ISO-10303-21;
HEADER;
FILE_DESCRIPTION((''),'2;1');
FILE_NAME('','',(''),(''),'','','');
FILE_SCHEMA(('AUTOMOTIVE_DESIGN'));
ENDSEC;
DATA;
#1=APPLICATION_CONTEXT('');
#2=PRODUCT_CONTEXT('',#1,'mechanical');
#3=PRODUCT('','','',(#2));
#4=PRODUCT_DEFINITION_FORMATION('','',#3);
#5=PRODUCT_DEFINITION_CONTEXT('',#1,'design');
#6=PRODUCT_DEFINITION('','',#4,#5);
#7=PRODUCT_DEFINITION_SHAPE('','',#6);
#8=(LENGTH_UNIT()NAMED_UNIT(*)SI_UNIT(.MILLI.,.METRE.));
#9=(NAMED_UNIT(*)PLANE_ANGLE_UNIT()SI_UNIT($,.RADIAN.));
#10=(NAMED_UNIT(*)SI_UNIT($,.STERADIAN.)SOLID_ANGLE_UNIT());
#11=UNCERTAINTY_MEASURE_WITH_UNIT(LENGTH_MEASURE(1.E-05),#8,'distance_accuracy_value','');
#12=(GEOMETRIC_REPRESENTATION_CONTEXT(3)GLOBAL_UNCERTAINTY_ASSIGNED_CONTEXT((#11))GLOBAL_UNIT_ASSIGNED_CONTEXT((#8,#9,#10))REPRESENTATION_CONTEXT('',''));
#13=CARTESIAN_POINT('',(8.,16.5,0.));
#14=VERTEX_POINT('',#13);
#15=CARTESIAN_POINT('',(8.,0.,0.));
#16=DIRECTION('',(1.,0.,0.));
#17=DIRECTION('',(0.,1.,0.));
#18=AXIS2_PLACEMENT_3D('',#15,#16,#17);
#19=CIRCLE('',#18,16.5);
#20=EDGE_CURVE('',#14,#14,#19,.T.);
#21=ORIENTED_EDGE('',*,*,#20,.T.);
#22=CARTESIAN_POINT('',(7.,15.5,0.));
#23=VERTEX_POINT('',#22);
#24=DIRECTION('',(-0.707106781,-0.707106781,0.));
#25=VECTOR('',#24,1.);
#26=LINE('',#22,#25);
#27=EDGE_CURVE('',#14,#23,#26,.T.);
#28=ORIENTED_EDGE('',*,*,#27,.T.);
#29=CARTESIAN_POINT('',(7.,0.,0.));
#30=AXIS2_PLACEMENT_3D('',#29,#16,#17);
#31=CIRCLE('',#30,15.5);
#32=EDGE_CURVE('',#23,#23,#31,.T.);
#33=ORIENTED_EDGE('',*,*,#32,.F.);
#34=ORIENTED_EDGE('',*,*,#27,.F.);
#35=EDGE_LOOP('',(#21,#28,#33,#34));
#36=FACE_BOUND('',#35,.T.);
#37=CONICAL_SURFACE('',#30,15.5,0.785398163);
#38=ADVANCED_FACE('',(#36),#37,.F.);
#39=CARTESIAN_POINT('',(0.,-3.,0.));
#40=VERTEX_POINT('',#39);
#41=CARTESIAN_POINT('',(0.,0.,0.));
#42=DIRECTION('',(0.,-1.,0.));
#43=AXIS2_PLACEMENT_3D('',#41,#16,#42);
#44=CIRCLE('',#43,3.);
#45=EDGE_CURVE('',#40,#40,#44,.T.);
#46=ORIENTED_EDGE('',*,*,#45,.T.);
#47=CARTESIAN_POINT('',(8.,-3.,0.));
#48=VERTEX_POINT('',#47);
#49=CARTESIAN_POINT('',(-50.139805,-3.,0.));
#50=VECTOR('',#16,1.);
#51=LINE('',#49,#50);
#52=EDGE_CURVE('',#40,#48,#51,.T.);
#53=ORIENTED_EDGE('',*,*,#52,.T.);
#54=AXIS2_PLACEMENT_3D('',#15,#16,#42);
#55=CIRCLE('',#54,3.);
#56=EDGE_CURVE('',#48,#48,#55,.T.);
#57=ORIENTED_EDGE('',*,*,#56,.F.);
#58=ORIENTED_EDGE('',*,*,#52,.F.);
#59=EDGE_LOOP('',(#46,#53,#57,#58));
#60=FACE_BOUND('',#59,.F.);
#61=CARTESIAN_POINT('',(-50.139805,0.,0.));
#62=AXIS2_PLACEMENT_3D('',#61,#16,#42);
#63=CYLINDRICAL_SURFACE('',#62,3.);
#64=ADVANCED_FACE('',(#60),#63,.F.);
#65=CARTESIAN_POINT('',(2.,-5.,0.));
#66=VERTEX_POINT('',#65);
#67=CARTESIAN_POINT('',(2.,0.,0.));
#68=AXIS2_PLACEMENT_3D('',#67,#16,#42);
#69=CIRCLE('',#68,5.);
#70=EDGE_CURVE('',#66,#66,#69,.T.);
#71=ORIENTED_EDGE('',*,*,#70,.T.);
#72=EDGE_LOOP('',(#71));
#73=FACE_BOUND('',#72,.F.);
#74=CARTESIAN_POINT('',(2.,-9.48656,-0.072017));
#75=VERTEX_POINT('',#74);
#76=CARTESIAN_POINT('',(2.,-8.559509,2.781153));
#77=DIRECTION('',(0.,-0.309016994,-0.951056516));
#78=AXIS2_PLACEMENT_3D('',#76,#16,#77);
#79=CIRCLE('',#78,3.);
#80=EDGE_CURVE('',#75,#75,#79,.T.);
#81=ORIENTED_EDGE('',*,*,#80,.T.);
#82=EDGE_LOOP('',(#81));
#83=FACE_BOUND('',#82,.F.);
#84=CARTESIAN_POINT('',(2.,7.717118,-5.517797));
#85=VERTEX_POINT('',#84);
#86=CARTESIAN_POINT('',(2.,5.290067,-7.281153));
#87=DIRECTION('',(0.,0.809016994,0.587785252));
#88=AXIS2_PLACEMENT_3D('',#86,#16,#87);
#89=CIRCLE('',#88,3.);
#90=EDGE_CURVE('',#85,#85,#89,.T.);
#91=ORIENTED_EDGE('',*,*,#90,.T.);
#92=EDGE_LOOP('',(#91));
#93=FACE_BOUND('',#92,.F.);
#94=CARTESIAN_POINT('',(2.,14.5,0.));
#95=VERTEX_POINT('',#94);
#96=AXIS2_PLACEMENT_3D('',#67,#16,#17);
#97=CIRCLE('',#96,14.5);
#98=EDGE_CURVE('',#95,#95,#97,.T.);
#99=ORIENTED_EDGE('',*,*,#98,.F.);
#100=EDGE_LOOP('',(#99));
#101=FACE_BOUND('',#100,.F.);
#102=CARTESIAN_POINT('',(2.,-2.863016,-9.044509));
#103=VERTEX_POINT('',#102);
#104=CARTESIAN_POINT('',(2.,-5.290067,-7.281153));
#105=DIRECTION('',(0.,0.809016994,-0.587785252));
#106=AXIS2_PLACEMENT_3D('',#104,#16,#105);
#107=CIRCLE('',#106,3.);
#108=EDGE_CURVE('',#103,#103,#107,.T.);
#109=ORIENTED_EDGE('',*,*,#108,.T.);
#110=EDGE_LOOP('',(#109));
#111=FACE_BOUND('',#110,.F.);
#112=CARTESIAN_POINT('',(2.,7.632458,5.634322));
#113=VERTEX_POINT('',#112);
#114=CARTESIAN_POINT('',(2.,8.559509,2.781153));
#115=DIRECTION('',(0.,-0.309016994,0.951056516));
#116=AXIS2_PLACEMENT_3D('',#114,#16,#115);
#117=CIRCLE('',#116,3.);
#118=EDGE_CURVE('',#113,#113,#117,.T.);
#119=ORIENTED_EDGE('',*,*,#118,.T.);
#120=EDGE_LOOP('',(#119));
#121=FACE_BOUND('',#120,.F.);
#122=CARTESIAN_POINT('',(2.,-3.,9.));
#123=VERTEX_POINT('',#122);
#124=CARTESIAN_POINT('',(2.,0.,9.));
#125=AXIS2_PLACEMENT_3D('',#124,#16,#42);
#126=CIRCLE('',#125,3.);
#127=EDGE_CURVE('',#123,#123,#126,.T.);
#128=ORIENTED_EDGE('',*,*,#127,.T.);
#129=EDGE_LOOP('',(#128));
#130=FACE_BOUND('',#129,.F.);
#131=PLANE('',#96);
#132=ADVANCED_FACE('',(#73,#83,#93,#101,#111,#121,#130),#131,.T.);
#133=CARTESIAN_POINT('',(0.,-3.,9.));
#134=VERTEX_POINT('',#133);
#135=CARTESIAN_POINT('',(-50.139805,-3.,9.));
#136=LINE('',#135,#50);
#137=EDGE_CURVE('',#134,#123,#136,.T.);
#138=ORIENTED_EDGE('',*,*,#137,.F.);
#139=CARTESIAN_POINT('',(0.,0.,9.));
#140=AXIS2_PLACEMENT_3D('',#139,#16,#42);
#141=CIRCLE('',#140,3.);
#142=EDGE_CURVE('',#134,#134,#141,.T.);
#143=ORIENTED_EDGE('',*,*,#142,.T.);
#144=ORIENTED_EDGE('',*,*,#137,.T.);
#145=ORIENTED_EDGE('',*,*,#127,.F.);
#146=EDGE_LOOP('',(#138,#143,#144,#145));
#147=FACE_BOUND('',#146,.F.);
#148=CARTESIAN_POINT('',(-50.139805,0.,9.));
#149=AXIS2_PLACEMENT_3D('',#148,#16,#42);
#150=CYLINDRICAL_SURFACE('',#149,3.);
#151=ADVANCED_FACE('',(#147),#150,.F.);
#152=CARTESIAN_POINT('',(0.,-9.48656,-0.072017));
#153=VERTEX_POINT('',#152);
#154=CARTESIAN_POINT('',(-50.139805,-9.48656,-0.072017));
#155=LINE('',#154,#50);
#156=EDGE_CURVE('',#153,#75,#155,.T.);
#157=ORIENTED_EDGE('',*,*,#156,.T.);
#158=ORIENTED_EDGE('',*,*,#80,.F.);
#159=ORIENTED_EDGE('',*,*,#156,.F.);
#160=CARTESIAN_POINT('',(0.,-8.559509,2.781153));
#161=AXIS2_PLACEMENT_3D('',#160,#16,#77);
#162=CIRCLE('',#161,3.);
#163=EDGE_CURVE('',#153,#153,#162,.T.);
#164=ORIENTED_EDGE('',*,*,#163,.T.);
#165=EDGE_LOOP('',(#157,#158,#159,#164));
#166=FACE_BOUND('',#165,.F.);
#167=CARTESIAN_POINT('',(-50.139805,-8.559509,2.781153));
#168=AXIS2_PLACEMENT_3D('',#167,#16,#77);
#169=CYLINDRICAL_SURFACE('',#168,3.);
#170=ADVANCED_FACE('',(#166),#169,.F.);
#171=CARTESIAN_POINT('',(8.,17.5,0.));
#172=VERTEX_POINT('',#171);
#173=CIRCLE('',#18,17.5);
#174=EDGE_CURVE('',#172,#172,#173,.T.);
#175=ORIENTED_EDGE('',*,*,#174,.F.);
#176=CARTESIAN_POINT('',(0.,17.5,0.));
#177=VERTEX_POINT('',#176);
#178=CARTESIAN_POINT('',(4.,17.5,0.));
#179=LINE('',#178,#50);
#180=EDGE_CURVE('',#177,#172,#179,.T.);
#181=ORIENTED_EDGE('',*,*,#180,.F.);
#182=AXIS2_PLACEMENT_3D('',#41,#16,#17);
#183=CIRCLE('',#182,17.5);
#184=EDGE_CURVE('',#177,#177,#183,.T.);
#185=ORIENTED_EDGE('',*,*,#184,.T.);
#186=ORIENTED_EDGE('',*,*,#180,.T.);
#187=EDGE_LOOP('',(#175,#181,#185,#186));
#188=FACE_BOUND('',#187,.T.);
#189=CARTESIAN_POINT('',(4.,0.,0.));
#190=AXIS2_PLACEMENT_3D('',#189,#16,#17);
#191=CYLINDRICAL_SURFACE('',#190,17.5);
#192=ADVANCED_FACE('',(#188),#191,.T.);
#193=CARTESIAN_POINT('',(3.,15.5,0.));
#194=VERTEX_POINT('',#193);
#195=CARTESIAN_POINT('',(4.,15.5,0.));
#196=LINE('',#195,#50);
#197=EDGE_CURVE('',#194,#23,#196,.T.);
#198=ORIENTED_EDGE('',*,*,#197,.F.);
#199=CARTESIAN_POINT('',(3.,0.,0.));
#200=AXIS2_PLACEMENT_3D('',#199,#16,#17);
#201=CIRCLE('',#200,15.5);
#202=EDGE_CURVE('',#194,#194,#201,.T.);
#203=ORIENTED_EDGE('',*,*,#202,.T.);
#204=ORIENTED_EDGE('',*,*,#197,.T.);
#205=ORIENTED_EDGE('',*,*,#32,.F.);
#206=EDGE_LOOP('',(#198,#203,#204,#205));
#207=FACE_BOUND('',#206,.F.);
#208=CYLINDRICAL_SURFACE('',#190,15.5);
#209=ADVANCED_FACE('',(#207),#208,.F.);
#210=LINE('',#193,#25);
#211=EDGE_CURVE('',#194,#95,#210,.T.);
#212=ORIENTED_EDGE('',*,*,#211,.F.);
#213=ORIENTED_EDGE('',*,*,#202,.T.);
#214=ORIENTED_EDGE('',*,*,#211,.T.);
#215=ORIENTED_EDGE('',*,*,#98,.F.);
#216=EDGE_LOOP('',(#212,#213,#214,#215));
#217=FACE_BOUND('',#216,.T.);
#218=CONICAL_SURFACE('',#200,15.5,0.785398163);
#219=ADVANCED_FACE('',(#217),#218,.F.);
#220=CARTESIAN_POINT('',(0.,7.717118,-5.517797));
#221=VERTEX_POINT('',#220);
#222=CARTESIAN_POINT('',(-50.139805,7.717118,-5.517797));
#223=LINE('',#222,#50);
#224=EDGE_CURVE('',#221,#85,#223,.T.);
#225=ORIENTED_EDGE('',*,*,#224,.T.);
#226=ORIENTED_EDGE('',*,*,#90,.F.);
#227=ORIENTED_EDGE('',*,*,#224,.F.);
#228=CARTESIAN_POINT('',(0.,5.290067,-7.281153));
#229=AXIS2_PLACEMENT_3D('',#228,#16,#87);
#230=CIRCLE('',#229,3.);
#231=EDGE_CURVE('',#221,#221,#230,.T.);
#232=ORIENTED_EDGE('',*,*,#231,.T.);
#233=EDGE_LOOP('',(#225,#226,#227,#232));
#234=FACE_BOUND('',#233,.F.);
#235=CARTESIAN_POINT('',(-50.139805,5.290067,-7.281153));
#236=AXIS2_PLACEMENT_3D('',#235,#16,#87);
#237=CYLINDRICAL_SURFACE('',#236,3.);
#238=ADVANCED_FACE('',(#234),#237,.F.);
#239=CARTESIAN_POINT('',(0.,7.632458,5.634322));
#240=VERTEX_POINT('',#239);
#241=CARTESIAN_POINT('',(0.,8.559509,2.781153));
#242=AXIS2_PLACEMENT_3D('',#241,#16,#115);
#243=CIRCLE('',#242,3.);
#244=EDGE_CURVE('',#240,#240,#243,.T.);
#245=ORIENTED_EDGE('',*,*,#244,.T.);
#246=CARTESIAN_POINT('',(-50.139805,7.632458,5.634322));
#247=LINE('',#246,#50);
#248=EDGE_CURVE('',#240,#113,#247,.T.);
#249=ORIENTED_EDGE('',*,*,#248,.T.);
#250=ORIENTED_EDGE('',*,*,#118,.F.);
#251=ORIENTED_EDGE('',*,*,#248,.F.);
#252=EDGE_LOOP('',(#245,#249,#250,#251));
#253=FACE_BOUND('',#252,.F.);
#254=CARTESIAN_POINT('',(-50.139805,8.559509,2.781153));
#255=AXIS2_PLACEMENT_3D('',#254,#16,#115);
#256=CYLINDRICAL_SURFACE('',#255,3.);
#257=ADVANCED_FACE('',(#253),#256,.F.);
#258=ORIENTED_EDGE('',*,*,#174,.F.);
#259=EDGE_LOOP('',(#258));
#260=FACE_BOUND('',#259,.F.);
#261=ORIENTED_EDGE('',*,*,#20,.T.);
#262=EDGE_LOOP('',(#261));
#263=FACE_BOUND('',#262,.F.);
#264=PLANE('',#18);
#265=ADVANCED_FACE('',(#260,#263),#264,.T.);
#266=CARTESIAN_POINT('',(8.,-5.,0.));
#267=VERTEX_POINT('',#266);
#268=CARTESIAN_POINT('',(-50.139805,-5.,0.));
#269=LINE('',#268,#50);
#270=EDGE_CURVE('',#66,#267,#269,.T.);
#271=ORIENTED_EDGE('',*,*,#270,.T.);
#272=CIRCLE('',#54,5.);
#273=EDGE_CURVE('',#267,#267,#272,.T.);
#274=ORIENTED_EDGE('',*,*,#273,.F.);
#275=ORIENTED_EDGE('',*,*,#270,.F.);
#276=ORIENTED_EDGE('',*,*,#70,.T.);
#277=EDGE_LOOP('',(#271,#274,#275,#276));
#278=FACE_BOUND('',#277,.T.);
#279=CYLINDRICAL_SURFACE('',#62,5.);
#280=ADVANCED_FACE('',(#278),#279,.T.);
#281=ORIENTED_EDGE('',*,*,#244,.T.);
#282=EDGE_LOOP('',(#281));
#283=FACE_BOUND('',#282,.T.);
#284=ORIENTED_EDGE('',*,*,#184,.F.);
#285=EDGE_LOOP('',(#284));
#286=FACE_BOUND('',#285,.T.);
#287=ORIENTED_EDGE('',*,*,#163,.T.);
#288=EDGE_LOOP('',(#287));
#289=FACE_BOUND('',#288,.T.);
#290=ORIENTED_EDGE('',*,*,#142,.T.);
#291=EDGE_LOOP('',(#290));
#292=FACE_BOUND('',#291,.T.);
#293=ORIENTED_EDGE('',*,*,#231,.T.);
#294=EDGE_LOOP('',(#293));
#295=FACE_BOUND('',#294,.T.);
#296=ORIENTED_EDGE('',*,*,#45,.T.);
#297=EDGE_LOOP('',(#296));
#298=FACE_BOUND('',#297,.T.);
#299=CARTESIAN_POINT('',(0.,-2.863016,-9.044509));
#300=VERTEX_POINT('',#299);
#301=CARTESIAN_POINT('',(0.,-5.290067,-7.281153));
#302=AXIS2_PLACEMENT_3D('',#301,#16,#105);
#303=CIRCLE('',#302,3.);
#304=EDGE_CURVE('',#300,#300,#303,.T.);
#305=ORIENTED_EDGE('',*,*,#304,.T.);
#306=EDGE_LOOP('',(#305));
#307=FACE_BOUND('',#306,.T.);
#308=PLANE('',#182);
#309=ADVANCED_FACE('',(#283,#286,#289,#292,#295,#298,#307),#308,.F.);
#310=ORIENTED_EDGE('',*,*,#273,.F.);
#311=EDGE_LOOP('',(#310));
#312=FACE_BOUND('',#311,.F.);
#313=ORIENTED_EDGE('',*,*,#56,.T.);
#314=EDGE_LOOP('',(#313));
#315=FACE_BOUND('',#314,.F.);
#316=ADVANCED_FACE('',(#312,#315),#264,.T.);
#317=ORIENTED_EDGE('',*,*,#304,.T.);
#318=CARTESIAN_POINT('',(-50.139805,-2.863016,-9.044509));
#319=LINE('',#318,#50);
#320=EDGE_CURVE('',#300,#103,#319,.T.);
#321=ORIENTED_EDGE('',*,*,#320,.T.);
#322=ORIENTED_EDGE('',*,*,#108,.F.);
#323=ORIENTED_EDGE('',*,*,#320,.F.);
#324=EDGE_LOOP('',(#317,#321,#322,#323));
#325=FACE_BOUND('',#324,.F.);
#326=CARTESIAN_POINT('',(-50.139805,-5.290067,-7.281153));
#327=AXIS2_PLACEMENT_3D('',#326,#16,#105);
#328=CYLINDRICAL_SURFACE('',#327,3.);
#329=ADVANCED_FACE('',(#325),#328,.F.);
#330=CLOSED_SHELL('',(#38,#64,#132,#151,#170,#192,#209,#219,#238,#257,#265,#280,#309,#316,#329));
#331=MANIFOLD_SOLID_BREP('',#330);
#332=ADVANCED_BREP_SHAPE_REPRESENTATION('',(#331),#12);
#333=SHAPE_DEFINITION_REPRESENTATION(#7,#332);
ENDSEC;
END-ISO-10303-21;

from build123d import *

# Parameters (mm, degrees)
F0_W            = 8
F0_H            = 17.5
F3_D            = 6
F4_T            = -2
F5_SIZE         = 1
F7_D            = 6
F7_COPIES_COUNT = 5


# Not quite as in the source:
# - a pattern or mirror of a feature is missing from the dataset's text; its kind, count and spacing are read off the source's solid


with BuildPart() as f1:
    # F0 (on Top) → F1 (revolve)
    with BuildSketch(Plane.XY):
        with Locations((4, 8.75)):
            Rectangle(F0_W, F0_H)
    revolve(axis=Axis((4, 0, 0), (1, 0, 0)))

    # F3 (through all)
    with Locations(Plane(origin=(0, 0, 0), x_dir=(0, 1, 0), z_dir=(-1, 0, 0))):
        with Locations((0, 0)):
            Hole(F3_D / 2)

    # F4
    f4_openings = [f1.faces().sort_by_distance(p)[0] for p in [
        (8, -17.005025, 0),
    ]]
    offset(amount=F4_T, openings=f4_openings)

    # F5
    f5_edges = [f1.edges().sort_by_distance(p)[0] for p in [
        (8, -15.5, 0),
        (5, 15.5, 0),
        (2, -15.5, 0),
    ]]
    chamfer(f5_edges, length=F5_SIZE)

    # F7 (through all)
    with Locations(Plane(origin=(0, 0, 0), x_dir=(0, 1, 0), z_dir=(-1, 0, 0))):
        with Locations((0, -9)):
            f7 = Hole(F7_D / 2)

    # F7_copies: F7 ×5 about axis
    f7_copies_axis = Axis((0, 0, 0), (1, 0, 0))
    for i in range(1, F7_COPIES_COUNT):
        add(f7.rotate(f7_copies_axis, i * 360 / F7_COPIES_COUNT), mode=Mode.SUBTRACT)


solid = f1.part
